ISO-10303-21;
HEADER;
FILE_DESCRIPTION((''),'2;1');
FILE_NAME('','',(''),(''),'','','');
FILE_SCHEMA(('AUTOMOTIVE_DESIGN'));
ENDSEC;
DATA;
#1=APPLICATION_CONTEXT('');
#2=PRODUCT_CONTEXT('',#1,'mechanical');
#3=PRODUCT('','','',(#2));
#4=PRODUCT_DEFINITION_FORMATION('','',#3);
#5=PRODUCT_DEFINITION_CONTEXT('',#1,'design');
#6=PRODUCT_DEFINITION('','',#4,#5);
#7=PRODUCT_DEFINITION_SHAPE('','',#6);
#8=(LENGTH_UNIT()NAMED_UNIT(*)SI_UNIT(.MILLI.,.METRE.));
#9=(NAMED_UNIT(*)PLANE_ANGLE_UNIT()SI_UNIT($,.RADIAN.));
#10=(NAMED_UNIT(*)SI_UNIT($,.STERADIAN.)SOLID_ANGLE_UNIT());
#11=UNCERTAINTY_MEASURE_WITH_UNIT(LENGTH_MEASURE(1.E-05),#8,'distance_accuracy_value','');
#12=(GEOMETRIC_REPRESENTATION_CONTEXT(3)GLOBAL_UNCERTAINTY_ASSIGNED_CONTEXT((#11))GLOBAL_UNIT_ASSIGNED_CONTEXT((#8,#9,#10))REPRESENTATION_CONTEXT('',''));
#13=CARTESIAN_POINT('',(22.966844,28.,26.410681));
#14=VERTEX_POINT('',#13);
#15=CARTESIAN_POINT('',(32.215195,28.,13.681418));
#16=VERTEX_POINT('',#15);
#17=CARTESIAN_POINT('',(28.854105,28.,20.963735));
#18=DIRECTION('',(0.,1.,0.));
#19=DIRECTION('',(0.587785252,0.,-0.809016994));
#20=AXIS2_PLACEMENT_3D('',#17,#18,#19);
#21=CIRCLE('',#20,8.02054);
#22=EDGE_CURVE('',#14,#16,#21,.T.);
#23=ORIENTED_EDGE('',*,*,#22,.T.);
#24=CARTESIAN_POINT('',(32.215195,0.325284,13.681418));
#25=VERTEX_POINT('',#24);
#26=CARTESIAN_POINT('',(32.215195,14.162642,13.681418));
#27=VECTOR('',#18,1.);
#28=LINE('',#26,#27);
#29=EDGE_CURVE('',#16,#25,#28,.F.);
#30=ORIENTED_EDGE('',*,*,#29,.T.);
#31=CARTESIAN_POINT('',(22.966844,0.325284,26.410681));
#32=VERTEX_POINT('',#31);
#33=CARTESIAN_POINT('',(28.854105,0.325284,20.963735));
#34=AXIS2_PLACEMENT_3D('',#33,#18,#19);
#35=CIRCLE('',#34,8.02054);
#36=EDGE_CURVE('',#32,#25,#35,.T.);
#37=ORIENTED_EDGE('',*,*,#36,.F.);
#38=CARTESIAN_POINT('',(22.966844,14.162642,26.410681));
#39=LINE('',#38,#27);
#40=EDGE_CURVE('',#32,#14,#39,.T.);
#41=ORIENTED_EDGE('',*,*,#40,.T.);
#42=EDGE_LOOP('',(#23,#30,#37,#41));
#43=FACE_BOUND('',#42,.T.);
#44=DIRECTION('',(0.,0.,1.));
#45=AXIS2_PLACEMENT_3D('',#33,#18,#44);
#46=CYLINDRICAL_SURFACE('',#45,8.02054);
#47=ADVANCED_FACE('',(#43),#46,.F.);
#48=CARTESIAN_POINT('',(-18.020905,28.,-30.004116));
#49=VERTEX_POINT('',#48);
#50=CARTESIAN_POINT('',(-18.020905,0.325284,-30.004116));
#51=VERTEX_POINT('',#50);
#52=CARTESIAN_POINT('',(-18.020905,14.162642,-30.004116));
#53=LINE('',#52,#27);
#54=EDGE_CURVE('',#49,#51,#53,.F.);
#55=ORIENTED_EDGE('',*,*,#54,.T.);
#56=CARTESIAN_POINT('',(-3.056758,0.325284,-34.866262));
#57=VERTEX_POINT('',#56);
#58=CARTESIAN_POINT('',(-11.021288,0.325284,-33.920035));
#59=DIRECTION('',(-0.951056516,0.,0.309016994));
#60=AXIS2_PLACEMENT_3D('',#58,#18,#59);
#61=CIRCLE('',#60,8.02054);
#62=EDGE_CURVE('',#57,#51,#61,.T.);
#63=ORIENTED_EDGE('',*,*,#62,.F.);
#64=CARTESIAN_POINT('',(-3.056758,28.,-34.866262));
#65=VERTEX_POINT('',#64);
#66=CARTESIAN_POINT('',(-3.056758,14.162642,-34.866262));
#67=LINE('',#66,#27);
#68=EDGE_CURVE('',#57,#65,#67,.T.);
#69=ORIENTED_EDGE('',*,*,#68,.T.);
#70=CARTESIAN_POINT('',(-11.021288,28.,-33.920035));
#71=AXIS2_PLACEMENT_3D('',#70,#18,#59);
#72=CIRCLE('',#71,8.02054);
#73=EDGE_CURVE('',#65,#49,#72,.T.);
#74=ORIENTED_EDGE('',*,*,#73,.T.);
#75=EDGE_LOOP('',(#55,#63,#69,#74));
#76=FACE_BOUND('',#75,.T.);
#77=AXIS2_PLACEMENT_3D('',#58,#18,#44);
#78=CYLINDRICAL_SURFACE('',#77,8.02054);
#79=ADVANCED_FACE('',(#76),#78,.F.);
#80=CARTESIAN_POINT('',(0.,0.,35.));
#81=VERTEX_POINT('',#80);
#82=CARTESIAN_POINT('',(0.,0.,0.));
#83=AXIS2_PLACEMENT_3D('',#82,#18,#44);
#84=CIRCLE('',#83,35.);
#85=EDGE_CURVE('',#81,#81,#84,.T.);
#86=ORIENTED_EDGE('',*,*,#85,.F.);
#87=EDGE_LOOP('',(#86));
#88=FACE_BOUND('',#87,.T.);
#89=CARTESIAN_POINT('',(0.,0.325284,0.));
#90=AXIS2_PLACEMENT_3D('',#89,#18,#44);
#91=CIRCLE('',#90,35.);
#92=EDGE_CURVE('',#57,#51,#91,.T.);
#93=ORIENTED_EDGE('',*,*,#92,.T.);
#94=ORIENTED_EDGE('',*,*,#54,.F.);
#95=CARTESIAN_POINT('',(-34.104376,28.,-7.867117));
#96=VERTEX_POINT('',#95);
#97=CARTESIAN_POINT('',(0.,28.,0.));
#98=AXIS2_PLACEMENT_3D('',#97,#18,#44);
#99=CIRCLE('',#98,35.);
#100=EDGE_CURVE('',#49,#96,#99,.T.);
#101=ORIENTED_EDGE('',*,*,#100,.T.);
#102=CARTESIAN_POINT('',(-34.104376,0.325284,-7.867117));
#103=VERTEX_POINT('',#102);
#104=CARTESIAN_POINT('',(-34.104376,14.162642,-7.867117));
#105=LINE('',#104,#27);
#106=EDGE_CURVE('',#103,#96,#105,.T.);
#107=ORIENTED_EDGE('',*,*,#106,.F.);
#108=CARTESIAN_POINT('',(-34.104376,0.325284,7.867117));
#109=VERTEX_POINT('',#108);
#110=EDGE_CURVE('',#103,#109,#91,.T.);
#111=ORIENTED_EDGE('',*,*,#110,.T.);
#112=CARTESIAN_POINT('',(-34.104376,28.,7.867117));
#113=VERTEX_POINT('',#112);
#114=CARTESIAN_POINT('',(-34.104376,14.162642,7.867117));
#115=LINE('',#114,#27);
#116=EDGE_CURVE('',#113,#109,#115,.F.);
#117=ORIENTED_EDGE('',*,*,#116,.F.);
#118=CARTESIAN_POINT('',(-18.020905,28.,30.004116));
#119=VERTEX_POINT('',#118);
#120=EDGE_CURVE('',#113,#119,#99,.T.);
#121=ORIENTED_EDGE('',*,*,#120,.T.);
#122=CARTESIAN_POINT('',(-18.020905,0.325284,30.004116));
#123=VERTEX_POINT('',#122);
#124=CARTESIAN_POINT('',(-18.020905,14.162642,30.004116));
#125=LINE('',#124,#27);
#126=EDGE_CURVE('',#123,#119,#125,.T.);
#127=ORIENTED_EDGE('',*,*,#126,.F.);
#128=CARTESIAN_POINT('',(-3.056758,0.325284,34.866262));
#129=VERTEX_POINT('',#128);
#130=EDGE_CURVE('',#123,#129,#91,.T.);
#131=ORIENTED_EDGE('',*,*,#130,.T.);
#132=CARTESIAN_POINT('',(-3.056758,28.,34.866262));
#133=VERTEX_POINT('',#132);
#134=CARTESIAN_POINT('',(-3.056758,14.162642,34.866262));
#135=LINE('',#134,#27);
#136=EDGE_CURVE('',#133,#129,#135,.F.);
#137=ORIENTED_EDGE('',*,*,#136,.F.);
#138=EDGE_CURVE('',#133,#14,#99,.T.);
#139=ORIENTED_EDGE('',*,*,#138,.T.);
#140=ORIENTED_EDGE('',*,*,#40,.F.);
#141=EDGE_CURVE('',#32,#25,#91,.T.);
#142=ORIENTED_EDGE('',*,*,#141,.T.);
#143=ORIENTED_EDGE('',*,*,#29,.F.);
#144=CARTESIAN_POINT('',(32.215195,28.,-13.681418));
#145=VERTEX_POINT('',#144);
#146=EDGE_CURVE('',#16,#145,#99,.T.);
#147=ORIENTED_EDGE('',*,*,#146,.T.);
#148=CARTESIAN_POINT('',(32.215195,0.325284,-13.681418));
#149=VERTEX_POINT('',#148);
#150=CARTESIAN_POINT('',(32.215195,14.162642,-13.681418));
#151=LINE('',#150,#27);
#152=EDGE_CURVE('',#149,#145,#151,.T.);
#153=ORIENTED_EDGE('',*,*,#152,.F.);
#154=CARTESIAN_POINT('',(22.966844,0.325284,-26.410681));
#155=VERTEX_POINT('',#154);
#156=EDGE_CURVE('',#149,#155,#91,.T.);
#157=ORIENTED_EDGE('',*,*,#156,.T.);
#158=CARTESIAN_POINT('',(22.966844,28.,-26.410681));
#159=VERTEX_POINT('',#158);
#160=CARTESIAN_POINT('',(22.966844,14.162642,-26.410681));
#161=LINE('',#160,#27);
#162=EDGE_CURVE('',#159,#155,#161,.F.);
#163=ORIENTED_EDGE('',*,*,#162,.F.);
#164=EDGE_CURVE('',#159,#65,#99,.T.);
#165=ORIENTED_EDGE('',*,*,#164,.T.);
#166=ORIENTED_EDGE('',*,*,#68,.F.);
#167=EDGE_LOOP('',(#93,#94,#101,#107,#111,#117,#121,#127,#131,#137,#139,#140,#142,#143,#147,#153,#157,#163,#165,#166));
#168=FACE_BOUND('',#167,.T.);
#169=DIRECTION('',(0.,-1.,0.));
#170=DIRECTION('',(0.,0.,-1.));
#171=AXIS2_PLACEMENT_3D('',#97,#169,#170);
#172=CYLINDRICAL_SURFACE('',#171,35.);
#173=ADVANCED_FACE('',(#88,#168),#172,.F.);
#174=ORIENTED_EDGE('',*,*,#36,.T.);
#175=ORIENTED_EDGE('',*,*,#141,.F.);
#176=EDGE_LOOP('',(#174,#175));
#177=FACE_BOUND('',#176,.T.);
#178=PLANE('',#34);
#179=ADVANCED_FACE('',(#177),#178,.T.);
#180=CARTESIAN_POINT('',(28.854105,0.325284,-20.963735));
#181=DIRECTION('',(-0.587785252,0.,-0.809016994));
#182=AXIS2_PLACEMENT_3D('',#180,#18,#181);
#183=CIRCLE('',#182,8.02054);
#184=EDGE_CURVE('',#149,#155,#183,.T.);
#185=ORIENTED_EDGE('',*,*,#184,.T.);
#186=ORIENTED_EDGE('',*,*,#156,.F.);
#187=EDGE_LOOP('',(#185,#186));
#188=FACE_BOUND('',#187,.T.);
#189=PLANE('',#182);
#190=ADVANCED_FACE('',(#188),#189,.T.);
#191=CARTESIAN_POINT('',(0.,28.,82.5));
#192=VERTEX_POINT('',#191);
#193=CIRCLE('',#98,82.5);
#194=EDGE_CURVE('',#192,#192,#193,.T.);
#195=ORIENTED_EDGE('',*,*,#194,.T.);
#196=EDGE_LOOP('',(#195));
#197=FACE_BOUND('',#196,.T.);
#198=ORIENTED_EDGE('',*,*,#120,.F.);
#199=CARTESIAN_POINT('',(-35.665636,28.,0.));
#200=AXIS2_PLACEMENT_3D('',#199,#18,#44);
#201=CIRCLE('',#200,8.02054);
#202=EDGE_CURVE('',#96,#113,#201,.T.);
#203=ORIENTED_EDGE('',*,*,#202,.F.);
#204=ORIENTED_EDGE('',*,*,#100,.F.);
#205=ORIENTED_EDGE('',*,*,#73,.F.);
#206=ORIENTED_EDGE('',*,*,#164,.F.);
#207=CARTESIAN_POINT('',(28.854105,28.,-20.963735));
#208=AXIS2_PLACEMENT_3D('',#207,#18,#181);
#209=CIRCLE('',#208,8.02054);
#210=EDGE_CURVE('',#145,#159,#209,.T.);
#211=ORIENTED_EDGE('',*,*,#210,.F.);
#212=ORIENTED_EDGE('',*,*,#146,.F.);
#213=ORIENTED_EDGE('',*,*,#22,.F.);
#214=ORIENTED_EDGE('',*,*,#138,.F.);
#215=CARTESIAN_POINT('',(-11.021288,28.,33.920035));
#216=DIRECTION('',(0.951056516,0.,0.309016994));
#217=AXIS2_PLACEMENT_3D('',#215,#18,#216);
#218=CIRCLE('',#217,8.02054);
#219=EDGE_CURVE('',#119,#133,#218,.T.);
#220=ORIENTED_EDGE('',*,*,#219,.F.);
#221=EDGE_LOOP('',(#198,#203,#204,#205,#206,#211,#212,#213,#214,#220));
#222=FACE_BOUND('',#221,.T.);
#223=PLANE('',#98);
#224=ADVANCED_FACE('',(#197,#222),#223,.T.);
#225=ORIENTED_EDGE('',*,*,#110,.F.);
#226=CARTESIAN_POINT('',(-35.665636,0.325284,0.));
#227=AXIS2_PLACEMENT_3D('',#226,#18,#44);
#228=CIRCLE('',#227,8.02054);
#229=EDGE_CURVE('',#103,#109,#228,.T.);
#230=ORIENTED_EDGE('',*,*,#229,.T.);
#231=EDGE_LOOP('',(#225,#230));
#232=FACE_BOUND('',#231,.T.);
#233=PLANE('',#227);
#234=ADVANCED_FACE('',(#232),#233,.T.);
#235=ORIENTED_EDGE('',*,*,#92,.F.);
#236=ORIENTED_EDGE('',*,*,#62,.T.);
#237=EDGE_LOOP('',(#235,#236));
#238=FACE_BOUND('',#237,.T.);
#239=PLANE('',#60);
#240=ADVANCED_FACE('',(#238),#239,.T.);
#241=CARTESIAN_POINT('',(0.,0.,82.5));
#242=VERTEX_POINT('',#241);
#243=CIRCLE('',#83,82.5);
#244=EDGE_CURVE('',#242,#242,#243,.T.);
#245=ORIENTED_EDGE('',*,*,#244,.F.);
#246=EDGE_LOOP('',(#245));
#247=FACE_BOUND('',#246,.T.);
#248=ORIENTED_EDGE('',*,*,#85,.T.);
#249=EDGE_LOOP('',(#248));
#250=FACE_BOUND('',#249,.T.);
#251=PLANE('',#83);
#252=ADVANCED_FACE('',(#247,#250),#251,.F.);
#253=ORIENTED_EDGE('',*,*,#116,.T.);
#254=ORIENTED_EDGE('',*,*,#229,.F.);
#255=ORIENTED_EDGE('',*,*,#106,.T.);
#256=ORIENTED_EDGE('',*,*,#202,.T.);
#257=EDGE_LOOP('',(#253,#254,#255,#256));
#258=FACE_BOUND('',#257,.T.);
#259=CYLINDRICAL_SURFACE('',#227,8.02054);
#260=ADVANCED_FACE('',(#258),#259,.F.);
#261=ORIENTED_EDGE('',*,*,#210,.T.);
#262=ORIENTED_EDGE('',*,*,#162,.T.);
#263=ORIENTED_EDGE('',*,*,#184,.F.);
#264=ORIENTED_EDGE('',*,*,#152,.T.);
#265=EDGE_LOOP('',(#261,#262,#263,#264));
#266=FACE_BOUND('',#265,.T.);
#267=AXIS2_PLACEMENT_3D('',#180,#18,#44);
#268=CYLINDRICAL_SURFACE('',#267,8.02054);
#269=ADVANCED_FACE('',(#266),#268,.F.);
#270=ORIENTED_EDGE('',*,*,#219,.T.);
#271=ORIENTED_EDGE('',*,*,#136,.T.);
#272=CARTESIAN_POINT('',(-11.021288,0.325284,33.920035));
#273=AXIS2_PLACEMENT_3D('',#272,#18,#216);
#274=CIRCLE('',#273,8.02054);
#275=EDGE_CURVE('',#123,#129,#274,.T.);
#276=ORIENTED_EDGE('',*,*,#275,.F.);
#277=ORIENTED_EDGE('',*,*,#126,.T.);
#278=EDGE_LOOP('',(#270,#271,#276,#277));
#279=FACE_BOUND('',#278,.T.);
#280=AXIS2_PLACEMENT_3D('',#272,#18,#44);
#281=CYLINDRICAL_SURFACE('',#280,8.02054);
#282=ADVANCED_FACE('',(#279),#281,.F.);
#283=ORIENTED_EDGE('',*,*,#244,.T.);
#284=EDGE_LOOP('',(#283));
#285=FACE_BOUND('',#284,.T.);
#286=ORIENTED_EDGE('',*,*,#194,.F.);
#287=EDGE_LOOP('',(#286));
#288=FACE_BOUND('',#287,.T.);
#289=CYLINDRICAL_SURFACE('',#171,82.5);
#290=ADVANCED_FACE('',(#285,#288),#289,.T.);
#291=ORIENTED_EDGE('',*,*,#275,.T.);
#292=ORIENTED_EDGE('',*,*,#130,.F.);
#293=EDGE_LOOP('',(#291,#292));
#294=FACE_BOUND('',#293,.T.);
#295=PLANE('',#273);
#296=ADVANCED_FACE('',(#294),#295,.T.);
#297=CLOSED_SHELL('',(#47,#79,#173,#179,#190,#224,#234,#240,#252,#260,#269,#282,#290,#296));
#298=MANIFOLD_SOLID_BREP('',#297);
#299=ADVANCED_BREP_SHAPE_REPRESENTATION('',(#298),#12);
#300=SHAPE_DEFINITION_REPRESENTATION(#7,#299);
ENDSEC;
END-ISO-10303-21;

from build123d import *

# Parameters (mm, degrees)
SKETCH1_R           = 82.5
BOSS_EXTRUDE1_DEPTH = 28
SKETCH2_R           = 35
CUT_EXTRUDE1_DEPTH  = 120.98541578
SKETCH3_R           = 8.020540442
CUT_EXTRUDE2_DEPTH  = 27.674716257
CIRPATTERN1_COUNT   = 5


with BuildPart() as part:
    # Sketch1 → Boss-Extrude1 (new body)
    with BuildSketch(Plane(origin=(0, 0, 0), x_dir=(1, 0, 0), z_dir=(0, 1, 0))):
        Circle(SKETCH1_R)
    extrude(amount=BOSS_EXTRUDE1_DEPTH)

    # Sketch2 → Cut-Extrude1 (cut, through all)
    with BuildSketch(Plane(origin=(0, 0, 0), x_dir=(1, 0, 0), z_dir=(0, 1, 0))):
        Circle(SKETCH2_R)
    extrude(amount=CUT_EXTRUDE1_DEPTH, mode=Mode.SUBTRACT)

    # Sketch3 → Cut-Extrude2 (cut)
    with BuildSketch(Plane(origin=(0, 28, 0), x_dir=(1, 0, 0), z_dir=(0, 1, 0))):
        with Locations((-35.665635629, 0)):
            Circle(SKETCH3_R)
    cut_extrude2 = extrude(amount=-CUT_EXTRUDE2_DEPTH, mode=Mode.SUBTRACT)

    # CirPattern1: Cut-Extrude2 ×5 about axis
    cirpattern1_axis = Axis((0, 0, 0), (0, 1, 0))
    for i in range(1, CIRPATTERN1_COUNT):
        add(cut_extrude2.rotate(cirpattern1_axis, i * 360 / CIRPATTERN1_COUNT), mode=Mode.SUBTRACT)


solid = part.part
